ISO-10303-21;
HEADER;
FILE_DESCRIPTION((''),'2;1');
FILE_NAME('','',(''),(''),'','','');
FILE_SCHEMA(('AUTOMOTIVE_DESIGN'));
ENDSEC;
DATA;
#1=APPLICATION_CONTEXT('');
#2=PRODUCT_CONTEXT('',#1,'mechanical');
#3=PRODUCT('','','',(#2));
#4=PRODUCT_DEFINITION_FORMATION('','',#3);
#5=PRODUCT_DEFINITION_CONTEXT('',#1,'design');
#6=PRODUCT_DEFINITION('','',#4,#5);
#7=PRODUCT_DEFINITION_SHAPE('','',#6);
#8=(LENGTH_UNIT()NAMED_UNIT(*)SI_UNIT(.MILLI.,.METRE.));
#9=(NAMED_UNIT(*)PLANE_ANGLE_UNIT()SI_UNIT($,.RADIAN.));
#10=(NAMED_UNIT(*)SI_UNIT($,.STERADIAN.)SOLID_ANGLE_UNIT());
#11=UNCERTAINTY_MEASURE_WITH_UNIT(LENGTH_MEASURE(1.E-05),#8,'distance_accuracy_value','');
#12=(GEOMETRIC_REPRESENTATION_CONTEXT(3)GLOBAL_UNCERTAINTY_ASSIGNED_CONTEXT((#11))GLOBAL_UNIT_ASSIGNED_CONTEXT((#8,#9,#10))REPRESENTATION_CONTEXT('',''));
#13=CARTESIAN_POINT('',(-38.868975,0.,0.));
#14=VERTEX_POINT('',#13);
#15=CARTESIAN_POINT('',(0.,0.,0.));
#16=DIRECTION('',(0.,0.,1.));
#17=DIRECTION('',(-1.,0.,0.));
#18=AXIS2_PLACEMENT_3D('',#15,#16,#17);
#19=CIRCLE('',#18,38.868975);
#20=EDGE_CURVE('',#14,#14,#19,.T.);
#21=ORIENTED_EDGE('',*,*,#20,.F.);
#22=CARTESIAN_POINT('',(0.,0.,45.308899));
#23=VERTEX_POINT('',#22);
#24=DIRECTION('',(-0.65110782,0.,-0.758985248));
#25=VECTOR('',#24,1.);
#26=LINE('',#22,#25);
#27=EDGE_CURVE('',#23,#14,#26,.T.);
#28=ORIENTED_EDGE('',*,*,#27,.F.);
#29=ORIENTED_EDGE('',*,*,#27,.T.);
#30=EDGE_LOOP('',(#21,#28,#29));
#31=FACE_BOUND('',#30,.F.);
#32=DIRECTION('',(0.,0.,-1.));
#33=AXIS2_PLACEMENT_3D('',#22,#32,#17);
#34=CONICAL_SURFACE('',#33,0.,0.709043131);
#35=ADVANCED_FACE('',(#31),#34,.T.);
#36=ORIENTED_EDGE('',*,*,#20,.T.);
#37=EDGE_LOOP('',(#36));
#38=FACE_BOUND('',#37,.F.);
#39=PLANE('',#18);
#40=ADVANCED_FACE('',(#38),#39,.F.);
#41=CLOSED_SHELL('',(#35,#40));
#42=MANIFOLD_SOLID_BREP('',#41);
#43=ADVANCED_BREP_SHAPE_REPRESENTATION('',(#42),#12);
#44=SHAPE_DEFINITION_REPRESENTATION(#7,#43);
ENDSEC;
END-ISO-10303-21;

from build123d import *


# Not quite as in the source:
# - the program builds the solid bodies; features that only make, move or delete a surface that nothing else refers to are left out


with BuildPart() as f1:
    # F0 (on Front) → F1 (revolve)
    with BuildSketch(Plane.XZ):
        Polygon((0, 45.3088991344), (-38.8689748943, 0), (0, 0), align=None)
    revolve(axis=Axis((0, 0, 22.6544495672), (0, 0, 1)))


solid = f1.part
